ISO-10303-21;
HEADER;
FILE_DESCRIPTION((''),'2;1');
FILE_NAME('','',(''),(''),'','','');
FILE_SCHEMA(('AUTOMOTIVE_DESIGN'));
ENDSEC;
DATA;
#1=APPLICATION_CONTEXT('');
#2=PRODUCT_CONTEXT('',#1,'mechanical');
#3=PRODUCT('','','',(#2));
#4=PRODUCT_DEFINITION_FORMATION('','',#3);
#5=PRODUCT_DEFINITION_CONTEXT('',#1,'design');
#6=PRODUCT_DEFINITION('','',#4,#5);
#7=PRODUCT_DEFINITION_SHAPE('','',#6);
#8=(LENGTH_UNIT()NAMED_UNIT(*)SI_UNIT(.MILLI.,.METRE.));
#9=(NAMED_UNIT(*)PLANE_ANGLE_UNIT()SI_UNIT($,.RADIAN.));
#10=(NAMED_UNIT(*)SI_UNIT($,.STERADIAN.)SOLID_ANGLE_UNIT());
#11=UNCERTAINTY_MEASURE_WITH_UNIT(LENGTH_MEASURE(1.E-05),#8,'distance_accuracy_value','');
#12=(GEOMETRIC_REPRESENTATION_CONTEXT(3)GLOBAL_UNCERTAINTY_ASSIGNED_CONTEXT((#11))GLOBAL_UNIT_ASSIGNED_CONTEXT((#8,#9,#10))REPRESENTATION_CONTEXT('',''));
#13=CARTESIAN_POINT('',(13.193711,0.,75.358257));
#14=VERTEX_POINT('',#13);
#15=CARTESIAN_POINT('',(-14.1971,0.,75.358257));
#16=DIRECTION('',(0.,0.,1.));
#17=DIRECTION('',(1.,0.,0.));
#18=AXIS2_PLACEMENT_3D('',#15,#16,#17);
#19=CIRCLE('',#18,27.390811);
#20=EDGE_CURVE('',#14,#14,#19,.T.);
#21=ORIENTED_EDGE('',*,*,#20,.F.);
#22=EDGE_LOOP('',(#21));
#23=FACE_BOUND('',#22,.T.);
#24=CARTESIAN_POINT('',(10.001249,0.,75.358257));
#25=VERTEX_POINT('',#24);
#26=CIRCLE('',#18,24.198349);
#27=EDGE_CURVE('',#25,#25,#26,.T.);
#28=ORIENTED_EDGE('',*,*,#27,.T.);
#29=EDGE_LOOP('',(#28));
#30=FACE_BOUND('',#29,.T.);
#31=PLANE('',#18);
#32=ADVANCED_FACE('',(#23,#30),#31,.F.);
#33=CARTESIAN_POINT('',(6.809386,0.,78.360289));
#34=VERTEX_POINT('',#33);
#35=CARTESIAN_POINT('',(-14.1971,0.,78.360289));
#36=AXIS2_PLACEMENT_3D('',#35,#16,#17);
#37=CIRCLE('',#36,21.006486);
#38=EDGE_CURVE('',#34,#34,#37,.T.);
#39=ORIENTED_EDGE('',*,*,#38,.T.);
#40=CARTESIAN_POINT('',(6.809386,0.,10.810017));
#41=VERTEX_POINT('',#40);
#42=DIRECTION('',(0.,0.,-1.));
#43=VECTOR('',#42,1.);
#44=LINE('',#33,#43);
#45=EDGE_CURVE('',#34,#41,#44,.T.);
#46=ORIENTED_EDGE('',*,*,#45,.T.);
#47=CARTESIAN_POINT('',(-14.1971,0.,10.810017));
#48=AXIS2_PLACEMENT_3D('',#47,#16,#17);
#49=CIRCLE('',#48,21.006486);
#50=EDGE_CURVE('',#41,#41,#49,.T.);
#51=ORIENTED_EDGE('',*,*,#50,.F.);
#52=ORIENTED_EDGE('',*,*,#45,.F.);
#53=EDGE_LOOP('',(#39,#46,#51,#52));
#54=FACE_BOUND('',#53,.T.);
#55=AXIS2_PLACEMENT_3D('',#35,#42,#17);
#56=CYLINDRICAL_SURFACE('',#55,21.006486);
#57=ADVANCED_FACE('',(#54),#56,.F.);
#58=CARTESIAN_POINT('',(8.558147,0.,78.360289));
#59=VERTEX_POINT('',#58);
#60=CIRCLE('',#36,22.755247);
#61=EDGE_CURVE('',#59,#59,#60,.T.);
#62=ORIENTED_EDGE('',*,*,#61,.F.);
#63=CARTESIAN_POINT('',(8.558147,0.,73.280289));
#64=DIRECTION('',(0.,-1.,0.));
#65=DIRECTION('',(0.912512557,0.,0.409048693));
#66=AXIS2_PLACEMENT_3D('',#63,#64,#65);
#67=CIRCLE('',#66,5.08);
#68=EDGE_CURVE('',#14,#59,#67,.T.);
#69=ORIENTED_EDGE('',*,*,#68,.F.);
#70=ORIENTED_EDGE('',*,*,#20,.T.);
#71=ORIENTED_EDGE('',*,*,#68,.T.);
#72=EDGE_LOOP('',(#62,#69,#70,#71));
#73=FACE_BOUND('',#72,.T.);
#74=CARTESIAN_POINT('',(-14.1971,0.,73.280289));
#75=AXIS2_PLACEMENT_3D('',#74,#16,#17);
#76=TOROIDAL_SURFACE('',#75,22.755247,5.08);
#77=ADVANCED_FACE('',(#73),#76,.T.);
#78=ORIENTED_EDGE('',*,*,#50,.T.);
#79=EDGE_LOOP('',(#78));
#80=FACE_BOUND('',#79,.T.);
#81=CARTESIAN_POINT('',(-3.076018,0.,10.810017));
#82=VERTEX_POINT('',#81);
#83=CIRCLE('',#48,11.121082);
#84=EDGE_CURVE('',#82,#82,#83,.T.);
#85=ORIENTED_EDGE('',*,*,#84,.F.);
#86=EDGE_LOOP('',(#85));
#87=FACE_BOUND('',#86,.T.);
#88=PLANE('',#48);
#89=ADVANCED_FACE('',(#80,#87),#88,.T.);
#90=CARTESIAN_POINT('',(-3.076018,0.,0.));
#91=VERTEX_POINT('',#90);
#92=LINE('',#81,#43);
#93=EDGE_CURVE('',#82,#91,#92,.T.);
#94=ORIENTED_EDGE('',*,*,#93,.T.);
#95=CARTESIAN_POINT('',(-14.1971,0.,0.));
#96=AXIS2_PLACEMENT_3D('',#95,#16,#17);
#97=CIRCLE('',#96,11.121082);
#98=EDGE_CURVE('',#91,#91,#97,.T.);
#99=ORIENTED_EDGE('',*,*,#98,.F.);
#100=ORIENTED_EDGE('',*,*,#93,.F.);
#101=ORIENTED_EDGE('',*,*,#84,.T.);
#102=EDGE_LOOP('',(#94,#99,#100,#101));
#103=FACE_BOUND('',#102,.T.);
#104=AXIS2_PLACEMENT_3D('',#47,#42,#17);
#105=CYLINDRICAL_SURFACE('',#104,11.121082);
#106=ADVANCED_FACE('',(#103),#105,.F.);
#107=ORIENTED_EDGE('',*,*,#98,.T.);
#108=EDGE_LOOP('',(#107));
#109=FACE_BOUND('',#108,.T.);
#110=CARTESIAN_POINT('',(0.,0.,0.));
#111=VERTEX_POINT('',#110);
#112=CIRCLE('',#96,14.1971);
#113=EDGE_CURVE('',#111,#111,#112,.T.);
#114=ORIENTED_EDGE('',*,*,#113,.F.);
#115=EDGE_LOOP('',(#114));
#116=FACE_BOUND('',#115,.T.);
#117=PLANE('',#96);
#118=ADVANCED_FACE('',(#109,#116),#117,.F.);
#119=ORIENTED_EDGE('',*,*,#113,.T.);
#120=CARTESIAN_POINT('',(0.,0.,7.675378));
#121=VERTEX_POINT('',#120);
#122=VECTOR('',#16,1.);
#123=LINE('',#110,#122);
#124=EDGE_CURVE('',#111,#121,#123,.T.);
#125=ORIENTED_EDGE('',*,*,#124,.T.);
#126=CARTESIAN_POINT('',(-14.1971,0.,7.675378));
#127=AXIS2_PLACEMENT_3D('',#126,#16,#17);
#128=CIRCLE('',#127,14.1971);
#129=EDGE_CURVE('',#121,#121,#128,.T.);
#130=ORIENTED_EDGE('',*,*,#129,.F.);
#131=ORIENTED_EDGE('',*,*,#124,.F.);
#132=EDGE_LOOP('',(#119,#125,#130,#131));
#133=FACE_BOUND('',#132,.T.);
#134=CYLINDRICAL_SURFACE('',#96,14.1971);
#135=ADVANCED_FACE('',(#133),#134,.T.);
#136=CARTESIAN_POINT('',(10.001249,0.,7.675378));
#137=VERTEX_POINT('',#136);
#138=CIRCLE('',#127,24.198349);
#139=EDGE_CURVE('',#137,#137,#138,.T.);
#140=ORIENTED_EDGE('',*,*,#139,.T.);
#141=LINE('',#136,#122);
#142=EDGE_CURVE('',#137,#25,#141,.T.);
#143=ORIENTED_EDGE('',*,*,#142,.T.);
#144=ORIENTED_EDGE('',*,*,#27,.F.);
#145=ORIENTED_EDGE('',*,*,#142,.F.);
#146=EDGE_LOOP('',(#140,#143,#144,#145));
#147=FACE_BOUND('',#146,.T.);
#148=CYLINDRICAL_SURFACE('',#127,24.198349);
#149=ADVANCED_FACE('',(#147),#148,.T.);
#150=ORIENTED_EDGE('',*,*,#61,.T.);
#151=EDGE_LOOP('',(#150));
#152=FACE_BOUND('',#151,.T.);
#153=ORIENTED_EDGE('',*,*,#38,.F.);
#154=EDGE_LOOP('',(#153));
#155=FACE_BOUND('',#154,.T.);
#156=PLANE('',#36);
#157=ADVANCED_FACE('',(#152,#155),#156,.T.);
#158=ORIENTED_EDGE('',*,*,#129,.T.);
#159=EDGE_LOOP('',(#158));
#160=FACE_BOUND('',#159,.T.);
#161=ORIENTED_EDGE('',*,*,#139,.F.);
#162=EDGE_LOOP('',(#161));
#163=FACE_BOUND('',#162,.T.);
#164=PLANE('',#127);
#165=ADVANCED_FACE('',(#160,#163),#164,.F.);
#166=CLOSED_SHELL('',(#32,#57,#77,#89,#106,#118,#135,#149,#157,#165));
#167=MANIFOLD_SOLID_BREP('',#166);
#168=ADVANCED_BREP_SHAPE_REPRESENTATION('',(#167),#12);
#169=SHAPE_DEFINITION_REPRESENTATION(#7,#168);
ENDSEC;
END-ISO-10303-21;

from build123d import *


# Not quite as in the source:
# - a fillet or chamfer that OpenCascade refuses, or shapes differently, is made with other operations: its cross-section is extruded or revolved along the edge and cut away or added


with BuildPart() as f1:
    # F0 (on Front) → F1 (revolve)
    with BuildSketch(Plane.XZ):
        Polygon((-3.0760182999, 0), (0, 0), (0, 7.6753781177), (10.0012486801, 7.6753781177), (10.0012486801, 75.3582566977), (13.1937107071, 75.3582566977), (13.1937107071, 78.3602893353), (6.8093864247, 78.3602893353), (6.8093864247, 10.8100166544), (-3.0760182999, 10.8100166544), align=None)
    revolve(axis=Axis((-14.1970999539, 0, 39.5920351148), (0, 0, 1)))

    # F2: fillet of radius 5.08 on 1 edges, made by hand

    # F2_s1 → F2_t2 (revolve, cut)
    with BuildSketch(Plane.XZ):
        with BuildLine():
            ThreePointArc((13.1937107071, 75.3582566977), (11.3195166688, 77.544235524), (8.5581469182, 78.3602893353))
            Line((8.5581469182, 78.3602893353), (13.1937107071, 78.3602893353))
            Line((13.1937107071, 78.3602893353), (13.1937107071, 75.3582566977))
        make_face()
    revolve(axis=Axis((-14.1970999539, 0, 78.3602893353), (0, 0, 1)), mode=Mode.SUBTRACT)


solid = f1.part
